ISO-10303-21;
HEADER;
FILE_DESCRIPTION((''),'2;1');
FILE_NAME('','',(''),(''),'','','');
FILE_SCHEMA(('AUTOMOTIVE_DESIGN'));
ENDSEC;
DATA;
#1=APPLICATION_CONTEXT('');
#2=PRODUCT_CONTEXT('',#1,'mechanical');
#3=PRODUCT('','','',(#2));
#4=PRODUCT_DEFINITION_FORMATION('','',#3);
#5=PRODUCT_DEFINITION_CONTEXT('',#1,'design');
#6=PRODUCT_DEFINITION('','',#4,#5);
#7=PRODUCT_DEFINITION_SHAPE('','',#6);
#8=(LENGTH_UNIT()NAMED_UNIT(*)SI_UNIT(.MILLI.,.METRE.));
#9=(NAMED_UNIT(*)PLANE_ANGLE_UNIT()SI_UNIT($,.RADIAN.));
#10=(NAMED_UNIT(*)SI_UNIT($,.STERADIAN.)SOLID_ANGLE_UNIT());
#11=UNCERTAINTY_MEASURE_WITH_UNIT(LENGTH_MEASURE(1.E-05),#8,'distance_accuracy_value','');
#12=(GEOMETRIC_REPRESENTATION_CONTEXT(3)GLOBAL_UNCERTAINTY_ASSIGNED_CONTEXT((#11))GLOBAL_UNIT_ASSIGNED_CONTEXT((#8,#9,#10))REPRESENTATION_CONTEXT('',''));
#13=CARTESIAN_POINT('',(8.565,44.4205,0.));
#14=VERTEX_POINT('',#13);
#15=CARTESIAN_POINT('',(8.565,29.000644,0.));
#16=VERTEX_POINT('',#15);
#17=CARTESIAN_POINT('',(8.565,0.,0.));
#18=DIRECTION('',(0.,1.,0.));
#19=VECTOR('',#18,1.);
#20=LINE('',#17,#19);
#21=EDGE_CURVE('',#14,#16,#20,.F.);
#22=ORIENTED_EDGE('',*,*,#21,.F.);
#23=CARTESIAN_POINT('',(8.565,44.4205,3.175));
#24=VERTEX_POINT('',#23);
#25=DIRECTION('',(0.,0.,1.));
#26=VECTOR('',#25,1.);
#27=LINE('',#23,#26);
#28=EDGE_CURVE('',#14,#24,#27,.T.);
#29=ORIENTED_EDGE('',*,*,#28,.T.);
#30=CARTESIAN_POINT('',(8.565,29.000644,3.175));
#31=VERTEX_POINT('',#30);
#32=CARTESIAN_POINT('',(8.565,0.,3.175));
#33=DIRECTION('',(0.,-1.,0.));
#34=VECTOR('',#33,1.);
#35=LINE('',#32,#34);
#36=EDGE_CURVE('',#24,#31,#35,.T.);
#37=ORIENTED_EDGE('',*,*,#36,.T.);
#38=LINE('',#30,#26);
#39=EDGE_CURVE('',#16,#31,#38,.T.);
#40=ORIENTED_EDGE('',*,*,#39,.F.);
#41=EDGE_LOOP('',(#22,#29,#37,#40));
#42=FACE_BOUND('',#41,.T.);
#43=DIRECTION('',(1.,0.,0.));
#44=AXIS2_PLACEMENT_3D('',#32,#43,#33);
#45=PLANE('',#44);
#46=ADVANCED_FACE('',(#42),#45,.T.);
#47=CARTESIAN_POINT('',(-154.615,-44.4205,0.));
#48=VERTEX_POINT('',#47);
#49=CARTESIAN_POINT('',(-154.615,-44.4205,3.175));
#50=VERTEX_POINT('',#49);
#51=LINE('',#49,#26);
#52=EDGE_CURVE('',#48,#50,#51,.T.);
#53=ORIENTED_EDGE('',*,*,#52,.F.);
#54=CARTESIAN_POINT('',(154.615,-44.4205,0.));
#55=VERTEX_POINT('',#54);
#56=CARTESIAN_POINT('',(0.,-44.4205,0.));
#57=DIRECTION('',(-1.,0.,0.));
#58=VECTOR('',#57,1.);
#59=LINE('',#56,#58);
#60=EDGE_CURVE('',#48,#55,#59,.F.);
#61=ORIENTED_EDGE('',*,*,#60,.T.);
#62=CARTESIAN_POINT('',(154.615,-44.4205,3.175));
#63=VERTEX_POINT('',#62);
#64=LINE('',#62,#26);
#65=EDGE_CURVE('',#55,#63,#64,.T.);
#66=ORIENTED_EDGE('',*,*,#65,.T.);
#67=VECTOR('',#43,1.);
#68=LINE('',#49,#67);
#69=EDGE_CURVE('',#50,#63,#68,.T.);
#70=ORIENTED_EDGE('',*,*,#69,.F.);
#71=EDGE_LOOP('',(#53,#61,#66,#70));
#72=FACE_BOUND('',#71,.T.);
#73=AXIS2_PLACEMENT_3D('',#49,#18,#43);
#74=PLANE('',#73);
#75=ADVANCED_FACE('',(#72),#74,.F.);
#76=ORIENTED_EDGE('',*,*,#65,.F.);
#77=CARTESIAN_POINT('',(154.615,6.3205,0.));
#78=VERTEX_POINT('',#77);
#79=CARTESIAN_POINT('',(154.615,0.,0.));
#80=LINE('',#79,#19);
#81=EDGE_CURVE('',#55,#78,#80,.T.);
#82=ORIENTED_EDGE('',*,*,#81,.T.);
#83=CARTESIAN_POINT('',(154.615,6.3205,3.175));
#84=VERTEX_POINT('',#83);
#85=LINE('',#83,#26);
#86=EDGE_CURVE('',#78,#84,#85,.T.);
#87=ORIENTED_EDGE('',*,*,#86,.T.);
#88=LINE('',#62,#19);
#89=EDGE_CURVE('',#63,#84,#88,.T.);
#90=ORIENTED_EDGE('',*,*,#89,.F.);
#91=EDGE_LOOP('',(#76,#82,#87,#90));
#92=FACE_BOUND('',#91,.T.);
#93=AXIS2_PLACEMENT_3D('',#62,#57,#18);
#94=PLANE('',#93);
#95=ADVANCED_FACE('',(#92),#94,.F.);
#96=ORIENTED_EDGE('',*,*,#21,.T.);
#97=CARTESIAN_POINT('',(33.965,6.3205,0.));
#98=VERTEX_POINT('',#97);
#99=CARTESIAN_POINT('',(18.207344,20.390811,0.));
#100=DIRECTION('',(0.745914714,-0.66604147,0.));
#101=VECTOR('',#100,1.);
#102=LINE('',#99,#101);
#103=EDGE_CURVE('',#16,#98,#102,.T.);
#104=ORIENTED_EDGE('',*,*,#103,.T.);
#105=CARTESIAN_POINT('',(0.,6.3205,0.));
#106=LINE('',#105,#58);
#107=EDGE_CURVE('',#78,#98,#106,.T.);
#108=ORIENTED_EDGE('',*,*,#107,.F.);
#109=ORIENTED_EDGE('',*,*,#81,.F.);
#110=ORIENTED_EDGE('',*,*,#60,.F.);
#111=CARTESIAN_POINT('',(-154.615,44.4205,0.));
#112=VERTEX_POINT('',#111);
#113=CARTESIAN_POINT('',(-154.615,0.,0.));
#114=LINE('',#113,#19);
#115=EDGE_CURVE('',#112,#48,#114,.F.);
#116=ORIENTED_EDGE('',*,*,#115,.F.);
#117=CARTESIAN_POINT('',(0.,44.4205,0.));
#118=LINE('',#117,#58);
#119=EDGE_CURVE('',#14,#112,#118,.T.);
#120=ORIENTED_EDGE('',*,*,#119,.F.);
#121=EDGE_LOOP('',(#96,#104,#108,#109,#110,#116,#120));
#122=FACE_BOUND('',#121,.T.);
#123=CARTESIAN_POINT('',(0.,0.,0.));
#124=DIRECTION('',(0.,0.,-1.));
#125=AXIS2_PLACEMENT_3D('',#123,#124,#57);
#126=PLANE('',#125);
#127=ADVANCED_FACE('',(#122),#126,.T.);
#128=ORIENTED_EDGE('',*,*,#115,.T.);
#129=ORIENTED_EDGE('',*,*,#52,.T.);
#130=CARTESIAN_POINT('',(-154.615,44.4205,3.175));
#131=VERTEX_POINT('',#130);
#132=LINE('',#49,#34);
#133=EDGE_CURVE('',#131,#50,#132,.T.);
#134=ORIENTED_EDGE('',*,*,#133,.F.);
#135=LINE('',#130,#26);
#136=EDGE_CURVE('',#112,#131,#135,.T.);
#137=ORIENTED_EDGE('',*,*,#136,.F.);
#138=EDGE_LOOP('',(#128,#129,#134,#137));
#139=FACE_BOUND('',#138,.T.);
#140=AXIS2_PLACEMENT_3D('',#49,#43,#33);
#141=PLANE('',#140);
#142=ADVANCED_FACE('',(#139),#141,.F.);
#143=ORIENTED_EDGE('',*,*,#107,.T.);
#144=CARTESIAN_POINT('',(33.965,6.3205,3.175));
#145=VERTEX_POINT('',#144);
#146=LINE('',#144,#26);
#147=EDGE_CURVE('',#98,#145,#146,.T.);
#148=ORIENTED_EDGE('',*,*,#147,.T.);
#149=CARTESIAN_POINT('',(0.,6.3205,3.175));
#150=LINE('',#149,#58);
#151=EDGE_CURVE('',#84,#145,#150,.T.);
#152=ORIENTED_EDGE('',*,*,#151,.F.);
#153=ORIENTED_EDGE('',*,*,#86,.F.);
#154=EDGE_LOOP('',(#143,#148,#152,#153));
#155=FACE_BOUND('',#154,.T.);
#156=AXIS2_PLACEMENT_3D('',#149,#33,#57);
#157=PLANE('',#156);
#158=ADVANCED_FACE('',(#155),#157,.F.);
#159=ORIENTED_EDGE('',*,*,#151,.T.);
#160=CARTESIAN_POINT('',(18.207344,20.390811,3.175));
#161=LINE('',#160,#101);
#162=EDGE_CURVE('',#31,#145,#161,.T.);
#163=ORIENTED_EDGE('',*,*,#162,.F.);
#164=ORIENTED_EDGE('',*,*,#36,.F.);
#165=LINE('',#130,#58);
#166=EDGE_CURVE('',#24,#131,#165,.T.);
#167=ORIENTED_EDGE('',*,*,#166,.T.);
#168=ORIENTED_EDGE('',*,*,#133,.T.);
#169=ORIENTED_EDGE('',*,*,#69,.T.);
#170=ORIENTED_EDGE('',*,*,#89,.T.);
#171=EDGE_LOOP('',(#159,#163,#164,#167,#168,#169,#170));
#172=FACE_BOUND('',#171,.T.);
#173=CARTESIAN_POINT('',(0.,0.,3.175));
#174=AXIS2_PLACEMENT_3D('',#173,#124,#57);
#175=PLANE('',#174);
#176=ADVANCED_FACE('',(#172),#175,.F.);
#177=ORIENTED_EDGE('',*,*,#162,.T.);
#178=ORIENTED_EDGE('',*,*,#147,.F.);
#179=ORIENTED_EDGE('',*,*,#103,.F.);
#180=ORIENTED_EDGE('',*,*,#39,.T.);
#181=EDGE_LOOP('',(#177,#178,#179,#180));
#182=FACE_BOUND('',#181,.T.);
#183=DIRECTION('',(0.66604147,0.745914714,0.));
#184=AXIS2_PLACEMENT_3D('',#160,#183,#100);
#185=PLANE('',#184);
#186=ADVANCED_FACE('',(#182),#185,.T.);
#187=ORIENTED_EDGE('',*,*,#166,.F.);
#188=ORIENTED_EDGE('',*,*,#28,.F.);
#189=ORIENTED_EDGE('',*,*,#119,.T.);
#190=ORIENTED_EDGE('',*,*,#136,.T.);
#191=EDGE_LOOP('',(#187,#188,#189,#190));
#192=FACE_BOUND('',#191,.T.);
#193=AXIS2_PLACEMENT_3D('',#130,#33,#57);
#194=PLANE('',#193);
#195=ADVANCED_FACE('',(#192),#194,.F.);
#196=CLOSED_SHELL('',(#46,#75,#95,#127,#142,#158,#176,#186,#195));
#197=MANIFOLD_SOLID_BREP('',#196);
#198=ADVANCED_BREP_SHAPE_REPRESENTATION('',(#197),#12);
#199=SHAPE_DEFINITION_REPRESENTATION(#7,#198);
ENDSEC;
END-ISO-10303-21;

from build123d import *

# Parameters (mm, degrees)
SKETCH1_W           = 309.23
SKETCH1_H           = 88.841000118
BOSS_EXTRUDE1_DEPTH = 3.175
CUT_EXTRUDE2_DEPTH  = 161.90077587


with BuildPart() as part:
    # Sketch1 → Boss-Extrude1 (new body)
    with BuildSketch(Plane.XY):
        Rectangle(SKETCH1_W, SKETCH1_H)
    extrude(amount=BOSS_EXTRUDE1_DEPTH)

    # Sketch4 → Cut-Extrude2 (cut, through all)
    with BuildSketch(Plane.XY.offset(3.175)):
        Polygon((33.965, 6.320500059), (154.615, 6.320500059), (154.615, 44.420500059), (8.565, 44.420500059), (8.565, 29.000644342), align=None)
    extrude(amount=-CUT_EXTRUDE2_DEPTH, mode=Mode.SUBTRACT)


solid = part.part
